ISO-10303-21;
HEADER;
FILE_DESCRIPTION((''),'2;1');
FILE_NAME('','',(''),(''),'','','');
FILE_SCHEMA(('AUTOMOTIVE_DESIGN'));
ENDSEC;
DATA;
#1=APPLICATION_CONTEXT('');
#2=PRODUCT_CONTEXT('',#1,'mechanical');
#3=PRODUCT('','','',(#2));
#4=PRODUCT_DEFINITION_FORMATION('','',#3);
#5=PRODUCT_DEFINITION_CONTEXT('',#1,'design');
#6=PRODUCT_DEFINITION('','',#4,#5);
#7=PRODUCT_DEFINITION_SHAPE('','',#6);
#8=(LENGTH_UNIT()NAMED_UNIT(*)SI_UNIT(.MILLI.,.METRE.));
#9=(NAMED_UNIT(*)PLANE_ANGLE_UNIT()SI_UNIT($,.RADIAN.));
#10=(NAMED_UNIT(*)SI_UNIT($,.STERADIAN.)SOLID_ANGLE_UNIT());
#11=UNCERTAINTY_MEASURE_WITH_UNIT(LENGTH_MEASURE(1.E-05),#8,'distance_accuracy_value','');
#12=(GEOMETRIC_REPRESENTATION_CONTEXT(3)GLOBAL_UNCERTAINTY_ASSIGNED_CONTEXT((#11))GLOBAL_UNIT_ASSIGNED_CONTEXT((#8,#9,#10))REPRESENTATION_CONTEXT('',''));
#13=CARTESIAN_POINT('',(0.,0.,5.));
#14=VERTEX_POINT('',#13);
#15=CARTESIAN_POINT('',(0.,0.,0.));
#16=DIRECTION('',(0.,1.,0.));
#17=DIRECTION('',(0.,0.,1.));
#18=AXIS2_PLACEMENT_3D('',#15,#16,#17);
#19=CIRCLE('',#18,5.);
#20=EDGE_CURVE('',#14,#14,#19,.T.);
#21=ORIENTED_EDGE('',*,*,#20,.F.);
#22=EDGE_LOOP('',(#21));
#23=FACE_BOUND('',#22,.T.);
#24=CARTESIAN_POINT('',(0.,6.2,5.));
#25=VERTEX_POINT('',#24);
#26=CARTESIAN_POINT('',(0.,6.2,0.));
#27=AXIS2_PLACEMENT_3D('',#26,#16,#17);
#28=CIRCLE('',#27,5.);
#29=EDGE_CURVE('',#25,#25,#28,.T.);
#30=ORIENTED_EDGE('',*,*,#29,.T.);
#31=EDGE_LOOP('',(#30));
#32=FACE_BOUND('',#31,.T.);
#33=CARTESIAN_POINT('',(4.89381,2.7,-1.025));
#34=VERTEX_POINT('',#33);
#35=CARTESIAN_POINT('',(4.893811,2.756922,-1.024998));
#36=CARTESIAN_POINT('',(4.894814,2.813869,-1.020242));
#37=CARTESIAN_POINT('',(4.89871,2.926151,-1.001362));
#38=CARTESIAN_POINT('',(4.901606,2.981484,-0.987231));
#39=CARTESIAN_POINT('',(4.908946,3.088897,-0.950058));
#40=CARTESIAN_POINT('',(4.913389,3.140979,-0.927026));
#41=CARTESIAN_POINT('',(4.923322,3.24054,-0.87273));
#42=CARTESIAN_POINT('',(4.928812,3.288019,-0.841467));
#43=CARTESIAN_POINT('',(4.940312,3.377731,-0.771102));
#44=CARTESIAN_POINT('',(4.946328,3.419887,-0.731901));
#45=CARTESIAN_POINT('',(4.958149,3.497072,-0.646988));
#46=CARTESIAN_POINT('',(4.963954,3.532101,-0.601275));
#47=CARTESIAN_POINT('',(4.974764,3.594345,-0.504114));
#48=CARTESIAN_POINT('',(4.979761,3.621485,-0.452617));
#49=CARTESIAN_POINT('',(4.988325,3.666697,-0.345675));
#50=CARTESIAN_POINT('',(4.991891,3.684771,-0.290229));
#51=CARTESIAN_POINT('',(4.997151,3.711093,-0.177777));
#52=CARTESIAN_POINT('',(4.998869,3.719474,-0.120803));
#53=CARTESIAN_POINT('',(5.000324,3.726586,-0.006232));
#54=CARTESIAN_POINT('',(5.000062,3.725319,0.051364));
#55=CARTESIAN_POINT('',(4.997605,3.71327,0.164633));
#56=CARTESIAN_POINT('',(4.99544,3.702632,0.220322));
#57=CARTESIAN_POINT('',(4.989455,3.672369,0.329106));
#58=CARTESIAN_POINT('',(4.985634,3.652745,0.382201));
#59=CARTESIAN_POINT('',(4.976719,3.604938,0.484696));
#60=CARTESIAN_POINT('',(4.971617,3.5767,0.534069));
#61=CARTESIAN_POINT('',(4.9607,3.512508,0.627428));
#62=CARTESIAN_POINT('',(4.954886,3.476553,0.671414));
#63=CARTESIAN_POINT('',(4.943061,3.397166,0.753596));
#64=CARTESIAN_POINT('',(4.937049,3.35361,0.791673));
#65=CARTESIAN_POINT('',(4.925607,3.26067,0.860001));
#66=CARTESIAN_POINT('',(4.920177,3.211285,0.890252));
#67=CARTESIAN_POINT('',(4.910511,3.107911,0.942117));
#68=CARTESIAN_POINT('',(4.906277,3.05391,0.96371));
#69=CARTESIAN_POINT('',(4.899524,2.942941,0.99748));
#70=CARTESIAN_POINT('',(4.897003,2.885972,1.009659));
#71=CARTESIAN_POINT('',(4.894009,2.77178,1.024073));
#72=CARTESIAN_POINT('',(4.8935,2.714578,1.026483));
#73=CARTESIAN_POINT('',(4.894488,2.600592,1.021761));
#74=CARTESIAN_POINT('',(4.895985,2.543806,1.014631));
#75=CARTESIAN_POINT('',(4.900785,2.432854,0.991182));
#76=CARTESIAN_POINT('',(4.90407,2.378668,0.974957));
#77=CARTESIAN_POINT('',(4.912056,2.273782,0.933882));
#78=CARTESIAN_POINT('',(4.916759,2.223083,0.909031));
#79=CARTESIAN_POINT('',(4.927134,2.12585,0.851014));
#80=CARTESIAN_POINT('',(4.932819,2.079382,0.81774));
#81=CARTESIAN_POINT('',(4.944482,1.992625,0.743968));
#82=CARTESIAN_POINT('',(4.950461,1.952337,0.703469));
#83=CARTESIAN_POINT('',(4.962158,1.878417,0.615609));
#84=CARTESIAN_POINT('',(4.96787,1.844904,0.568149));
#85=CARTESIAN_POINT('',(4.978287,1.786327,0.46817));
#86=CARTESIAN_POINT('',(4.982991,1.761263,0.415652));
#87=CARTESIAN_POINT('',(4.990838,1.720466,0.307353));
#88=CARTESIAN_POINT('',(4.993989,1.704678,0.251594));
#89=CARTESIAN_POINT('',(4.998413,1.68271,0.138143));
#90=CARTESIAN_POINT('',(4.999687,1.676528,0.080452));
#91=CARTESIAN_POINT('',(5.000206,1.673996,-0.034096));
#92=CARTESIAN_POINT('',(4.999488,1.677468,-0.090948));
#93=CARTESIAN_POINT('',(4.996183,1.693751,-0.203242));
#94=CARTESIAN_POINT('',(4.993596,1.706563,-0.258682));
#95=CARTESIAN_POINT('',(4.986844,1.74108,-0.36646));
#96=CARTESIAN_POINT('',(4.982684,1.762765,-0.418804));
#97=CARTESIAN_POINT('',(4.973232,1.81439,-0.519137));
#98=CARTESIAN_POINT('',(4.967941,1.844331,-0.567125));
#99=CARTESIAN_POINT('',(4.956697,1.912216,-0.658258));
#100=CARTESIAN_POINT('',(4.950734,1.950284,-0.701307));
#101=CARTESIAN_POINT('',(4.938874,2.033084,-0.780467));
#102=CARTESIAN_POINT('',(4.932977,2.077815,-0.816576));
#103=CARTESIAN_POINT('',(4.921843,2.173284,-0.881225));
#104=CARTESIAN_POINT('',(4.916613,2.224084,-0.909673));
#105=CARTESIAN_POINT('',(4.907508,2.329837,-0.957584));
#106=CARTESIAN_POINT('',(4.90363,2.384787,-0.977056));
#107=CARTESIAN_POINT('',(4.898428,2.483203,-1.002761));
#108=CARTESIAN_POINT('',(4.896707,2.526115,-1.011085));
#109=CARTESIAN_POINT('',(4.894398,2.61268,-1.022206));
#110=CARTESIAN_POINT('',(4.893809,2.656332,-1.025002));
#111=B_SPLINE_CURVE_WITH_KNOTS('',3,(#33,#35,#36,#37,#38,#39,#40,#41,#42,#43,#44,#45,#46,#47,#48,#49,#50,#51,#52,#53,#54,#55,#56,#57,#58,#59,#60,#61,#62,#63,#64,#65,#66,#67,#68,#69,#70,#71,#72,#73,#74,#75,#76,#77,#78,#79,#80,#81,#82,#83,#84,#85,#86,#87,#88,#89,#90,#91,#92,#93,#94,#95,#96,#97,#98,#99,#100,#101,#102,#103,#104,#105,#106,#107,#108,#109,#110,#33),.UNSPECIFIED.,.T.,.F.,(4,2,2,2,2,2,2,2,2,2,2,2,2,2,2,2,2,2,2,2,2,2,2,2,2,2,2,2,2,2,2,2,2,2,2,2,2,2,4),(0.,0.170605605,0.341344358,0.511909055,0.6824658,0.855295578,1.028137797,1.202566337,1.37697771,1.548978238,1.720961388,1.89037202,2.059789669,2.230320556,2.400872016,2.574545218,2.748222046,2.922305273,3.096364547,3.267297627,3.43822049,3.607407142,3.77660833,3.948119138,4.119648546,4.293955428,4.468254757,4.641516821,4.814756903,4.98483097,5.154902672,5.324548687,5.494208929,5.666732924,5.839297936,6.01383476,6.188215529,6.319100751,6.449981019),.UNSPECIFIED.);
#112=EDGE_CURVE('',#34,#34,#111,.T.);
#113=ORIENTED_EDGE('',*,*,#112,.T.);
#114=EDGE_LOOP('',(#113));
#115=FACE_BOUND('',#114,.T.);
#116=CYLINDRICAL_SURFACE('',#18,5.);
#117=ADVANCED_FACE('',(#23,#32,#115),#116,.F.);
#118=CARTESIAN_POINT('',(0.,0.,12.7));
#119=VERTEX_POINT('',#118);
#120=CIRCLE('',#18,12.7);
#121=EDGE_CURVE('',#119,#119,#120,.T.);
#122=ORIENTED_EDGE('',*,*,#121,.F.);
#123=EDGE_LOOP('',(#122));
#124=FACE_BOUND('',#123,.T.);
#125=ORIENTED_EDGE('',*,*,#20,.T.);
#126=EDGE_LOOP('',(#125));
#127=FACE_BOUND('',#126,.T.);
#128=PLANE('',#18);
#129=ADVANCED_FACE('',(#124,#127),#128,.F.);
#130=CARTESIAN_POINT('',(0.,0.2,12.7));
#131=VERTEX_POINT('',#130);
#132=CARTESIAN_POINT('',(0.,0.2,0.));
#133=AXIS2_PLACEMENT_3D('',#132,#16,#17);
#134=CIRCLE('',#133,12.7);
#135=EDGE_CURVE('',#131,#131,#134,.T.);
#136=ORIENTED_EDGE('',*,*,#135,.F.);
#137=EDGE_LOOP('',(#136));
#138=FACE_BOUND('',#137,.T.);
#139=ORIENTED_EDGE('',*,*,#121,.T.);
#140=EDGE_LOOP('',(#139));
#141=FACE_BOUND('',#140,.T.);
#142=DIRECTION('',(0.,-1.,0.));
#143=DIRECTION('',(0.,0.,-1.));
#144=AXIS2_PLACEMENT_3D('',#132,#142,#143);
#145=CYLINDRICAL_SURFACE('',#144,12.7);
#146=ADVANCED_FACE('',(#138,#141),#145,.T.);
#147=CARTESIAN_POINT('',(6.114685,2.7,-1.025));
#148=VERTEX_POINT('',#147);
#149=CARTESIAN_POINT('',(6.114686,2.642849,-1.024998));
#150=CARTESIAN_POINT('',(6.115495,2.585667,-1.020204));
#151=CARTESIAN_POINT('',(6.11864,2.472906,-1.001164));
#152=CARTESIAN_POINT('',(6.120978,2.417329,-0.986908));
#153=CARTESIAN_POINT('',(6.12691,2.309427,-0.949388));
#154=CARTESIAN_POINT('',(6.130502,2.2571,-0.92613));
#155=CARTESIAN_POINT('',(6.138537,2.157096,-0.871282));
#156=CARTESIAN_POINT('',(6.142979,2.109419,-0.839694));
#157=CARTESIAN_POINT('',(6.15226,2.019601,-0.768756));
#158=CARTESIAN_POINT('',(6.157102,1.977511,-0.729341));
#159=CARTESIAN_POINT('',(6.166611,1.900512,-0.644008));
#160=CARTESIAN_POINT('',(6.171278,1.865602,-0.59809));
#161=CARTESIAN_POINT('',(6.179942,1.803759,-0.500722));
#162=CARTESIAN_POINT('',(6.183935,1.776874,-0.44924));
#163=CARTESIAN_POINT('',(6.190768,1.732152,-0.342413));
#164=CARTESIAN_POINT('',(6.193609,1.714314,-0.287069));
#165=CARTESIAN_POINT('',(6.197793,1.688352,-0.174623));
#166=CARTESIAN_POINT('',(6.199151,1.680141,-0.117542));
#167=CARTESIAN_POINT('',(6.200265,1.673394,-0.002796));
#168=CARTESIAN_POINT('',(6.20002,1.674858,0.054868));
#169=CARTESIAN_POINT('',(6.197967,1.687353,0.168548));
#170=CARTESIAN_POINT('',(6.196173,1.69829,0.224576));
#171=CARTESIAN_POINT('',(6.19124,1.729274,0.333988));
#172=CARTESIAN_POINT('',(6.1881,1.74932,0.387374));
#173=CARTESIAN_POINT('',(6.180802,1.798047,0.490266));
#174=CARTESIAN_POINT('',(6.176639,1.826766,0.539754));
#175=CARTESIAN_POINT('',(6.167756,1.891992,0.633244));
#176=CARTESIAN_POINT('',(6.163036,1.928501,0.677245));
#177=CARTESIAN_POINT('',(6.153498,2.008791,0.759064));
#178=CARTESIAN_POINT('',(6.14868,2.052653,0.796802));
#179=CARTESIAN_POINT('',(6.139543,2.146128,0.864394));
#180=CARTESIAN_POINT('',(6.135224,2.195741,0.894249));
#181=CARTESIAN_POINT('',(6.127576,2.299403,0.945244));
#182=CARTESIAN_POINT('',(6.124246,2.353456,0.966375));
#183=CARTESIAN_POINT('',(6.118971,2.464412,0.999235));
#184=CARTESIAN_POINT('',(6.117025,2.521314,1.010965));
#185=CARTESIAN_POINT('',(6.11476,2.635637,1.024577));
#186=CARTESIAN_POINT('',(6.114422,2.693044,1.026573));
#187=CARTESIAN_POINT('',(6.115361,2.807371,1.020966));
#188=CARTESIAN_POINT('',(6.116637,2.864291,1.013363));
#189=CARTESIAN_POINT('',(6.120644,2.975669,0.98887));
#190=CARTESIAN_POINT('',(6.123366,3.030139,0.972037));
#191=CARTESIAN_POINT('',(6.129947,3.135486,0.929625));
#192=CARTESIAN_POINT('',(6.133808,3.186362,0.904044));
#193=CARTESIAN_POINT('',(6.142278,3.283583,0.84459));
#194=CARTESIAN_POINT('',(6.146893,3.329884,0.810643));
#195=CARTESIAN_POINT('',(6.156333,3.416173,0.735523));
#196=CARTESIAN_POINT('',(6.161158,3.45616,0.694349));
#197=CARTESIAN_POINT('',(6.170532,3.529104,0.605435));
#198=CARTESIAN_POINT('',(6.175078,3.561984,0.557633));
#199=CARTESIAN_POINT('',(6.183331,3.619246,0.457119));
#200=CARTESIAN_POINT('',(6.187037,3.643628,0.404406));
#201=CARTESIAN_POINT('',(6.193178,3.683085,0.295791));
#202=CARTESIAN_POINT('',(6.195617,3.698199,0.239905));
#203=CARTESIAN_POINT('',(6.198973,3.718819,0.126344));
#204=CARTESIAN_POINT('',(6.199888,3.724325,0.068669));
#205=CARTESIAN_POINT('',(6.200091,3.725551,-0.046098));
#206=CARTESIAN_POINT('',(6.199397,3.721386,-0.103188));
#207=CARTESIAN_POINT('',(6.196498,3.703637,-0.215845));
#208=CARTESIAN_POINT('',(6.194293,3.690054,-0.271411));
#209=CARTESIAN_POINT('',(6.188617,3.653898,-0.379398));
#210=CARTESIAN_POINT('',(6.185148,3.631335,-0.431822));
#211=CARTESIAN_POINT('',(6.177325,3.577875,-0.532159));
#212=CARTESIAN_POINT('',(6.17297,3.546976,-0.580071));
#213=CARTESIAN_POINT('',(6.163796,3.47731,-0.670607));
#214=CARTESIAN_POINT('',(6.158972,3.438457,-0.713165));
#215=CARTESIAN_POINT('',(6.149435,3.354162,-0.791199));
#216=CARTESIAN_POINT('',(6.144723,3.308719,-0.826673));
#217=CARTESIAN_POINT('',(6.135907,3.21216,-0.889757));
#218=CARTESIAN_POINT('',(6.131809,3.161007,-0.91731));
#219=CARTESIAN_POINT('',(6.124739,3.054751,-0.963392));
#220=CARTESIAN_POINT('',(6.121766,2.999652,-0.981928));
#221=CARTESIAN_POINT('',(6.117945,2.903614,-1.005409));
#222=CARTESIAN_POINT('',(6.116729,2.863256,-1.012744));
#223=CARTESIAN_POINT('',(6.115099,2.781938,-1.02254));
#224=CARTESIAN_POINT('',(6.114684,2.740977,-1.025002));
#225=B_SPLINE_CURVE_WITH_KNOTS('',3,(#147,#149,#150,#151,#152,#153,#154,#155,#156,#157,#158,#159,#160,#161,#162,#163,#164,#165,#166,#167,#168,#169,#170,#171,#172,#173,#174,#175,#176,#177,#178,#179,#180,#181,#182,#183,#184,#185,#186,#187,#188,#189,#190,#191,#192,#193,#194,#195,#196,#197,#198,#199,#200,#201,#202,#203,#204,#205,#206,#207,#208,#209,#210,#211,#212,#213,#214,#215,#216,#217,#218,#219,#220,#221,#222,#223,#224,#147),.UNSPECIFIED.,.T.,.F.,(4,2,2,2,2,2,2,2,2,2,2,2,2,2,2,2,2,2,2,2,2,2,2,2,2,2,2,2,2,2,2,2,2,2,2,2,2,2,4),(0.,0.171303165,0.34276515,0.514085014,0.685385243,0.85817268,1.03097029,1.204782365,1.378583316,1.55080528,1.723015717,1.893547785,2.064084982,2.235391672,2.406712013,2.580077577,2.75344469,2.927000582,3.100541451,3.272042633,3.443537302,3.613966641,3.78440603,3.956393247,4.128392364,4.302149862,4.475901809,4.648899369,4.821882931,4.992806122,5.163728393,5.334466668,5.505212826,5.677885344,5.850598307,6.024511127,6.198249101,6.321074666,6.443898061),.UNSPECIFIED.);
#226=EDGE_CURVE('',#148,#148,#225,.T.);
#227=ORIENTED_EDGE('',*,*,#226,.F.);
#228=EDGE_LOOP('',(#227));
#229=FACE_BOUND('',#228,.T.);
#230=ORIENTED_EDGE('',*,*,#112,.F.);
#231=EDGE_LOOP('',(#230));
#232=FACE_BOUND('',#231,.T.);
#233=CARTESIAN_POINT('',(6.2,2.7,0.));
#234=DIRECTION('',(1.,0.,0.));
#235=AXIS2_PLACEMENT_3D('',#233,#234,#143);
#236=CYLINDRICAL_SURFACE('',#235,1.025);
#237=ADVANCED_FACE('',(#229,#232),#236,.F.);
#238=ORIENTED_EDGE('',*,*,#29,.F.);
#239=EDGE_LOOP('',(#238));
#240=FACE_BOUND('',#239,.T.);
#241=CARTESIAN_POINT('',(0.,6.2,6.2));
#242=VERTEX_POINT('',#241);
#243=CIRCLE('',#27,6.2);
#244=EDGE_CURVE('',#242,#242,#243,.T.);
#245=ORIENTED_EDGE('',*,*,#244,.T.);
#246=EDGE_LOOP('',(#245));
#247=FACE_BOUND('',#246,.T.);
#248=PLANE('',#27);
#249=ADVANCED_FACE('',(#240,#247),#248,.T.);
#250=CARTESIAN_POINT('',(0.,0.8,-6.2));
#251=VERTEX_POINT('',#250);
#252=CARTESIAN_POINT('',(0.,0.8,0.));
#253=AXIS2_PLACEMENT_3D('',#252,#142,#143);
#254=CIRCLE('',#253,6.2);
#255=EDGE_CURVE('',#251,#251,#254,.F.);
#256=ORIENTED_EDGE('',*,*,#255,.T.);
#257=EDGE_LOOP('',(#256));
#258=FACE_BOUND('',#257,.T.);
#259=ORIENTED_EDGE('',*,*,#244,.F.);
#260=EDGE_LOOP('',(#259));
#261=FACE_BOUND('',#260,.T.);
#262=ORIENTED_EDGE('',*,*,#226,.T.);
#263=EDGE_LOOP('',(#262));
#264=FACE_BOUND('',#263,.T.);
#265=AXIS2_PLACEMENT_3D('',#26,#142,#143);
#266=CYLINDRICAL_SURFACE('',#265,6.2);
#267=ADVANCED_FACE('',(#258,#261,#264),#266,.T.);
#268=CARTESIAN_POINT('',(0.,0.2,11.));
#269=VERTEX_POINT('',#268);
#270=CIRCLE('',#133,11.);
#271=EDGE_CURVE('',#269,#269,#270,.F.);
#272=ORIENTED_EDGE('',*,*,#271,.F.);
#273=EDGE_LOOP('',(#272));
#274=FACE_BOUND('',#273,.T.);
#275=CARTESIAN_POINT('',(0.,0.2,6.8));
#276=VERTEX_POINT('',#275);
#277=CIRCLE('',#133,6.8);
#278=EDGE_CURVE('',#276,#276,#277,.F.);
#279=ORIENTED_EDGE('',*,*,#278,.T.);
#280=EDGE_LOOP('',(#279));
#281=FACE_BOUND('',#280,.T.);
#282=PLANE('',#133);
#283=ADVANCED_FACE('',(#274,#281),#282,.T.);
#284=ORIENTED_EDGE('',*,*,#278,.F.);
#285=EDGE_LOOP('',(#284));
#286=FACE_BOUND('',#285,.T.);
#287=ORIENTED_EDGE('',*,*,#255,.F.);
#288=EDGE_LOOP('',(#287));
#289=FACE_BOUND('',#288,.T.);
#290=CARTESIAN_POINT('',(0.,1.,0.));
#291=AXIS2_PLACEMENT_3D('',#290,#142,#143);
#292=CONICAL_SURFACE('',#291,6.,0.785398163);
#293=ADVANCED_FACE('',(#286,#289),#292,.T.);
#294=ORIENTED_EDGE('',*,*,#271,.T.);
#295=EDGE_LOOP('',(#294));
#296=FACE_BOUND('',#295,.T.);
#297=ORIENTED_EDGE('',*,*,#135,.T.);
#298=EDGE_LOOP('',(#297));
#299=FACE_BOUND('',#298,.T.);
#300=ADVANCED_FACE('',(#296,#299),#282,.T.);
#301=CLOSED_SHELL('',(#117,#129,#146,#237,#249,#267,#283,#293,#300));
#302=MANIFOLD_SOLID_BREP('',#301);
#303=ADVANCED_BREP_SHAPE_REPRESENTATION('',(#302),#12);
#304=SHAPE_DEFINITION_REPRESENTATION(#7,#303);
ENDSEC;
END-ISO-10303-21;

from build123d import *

# Parameters (mm, degrees)
SKETCH1_R               = 12.7
BOSS_EXTRUDE1_DEPTH     = 0.2
SKETCH2_R               = 7
BOSS_EXTRUDE2_DEPTH     = 0.8
SKETCH3_R               = 6.2
BOSS_EXTRUDE3_DEPTH     = 5.2
CHAMFER1_SIZE           = 1
SKETCH5_R               = 5
CUT_EXTRUDE1_DEPTH      = 20.000526308
M2_5_TAPPED_HOLE1_D     = 2.05
M2_5_TAPPED_HOLE1_DEPTH = 6.199
M2_5_TAPPED_HOLE1_TIP   = 0.615882135


with BuildPart() as part:
    # Sketch1 → Boss-Extrude1 (new body)
    with BuildSketch(Plane(origin=(0, 0, 0), x_dir=(1, 0, 0), z_dir=(0, 1, 0))):
        with Locations(Location((0, 0, 0), (0, 0, 270))):
            Circle(SKETCH1_R)
    extrude(amount=BOSS_EXTRUDE1_DEPTH)

    # Sketch2 → Boss-Extrude2 (add)
    with BuildSketch(Plane(origin=(0, 0.2, 0), x_dir=(1, 0, 0), z_dir=(0, 1, 0))):
        with Locations(Location((0, 0, 0), (0, 0, 270))):
            Circle(SKETCH2_R)
    extrude(amount=BOSS_EXTRUDE2_DEPTH)

    # Sketch3 → Boss-Extrude3 (add)
    with BuildSketch(Plane(origin=(0, 1, 0), x_dir=(1, 0, 0), z_dir=(0, 1, 0))):
        with Locations(Location((0, 0, 0), (0, 0, 270))):
            Circle(SKETCH3_R)
    extrude(amount=BOSS_EXTRUDE3_DEPTH)

    # Chamfer1
    # the kernel refuses this chamfer: 1 mm, written as the material it takes off along each edge
    with BuildSketch(Plane(origin=(0, 1, 0), x_dir=(0, 0, 1), z_dir=(-1, 0, 0))) as chamfer1_piece_1_section:
        Polygon((7, -CHAMFER1_SIZE), (7 - CHAMFER1_SIZE, 0), (7, 0), align=None)
    chamfer1_piece_1 = revolve(axis=Axis((0, 1, 0), (0, 1, 0)), mode=Mode.PRIVATE)
    chamfer1_piece_1 = split(chamfer1_piece_1, bisect_by=Plane(origin=(0, 0.2, -6.519416157), z_dir=(0, 1, 0)), keep=Keep.TOP, mode=Mode.PRIVATE)
    chamfer1_piece_1 = chamfer1_piece_1 - Plane(origin=(0, 0.519416157, 0), x_dir=(0, 0, 1), z_dir=(0, -1, 0)) * Cylinder(6.2, 28, mode=Mode.PRIVATE)
    add(chamfer1_piece_1, mode=Mode.SUBTRACT)

    # Sketch5 → Cut-Extrude1 (cut, through all)
    with BuildSketch(Plane(origin=(0, 6.2, 0), x_dir=(1, 0, 0), z_dir=(0, 1, 0))):
        with Locations(Location((0, 0, 0), (0, 0, 270))):
            Circle(SKETCH5_R)
    extrude(amount=-CUT_EXTRUDE1_DEPTH, mode=Mode.SUBTRACT)

    # M2.5 Tapped Hole1
    with Locations(Plane(origin=(6.2, 2.7, 0), x_dir=(0, 0, 1), z_dir=(1, 0, 0))):
        with Locations((0, 0)):
            Hole(M2_5_TAPPED_HOLE1_D / 2, depth=M2_5_TAPPED_HOLE1_DEPTH)
            with Locations((0, 0, -(M2_5_TAPPED_HOLE1_DEPTH + M2_5_TAPPED_HOLE1_TIP / 2))):  # 118° drill point
                Cone(0, M2_5_TAPPED_HOLE1_D / 2, M2_5_TAPPED_HOLE1_TIP, mode=Mode.SUBTRACT)


solid = part.part
